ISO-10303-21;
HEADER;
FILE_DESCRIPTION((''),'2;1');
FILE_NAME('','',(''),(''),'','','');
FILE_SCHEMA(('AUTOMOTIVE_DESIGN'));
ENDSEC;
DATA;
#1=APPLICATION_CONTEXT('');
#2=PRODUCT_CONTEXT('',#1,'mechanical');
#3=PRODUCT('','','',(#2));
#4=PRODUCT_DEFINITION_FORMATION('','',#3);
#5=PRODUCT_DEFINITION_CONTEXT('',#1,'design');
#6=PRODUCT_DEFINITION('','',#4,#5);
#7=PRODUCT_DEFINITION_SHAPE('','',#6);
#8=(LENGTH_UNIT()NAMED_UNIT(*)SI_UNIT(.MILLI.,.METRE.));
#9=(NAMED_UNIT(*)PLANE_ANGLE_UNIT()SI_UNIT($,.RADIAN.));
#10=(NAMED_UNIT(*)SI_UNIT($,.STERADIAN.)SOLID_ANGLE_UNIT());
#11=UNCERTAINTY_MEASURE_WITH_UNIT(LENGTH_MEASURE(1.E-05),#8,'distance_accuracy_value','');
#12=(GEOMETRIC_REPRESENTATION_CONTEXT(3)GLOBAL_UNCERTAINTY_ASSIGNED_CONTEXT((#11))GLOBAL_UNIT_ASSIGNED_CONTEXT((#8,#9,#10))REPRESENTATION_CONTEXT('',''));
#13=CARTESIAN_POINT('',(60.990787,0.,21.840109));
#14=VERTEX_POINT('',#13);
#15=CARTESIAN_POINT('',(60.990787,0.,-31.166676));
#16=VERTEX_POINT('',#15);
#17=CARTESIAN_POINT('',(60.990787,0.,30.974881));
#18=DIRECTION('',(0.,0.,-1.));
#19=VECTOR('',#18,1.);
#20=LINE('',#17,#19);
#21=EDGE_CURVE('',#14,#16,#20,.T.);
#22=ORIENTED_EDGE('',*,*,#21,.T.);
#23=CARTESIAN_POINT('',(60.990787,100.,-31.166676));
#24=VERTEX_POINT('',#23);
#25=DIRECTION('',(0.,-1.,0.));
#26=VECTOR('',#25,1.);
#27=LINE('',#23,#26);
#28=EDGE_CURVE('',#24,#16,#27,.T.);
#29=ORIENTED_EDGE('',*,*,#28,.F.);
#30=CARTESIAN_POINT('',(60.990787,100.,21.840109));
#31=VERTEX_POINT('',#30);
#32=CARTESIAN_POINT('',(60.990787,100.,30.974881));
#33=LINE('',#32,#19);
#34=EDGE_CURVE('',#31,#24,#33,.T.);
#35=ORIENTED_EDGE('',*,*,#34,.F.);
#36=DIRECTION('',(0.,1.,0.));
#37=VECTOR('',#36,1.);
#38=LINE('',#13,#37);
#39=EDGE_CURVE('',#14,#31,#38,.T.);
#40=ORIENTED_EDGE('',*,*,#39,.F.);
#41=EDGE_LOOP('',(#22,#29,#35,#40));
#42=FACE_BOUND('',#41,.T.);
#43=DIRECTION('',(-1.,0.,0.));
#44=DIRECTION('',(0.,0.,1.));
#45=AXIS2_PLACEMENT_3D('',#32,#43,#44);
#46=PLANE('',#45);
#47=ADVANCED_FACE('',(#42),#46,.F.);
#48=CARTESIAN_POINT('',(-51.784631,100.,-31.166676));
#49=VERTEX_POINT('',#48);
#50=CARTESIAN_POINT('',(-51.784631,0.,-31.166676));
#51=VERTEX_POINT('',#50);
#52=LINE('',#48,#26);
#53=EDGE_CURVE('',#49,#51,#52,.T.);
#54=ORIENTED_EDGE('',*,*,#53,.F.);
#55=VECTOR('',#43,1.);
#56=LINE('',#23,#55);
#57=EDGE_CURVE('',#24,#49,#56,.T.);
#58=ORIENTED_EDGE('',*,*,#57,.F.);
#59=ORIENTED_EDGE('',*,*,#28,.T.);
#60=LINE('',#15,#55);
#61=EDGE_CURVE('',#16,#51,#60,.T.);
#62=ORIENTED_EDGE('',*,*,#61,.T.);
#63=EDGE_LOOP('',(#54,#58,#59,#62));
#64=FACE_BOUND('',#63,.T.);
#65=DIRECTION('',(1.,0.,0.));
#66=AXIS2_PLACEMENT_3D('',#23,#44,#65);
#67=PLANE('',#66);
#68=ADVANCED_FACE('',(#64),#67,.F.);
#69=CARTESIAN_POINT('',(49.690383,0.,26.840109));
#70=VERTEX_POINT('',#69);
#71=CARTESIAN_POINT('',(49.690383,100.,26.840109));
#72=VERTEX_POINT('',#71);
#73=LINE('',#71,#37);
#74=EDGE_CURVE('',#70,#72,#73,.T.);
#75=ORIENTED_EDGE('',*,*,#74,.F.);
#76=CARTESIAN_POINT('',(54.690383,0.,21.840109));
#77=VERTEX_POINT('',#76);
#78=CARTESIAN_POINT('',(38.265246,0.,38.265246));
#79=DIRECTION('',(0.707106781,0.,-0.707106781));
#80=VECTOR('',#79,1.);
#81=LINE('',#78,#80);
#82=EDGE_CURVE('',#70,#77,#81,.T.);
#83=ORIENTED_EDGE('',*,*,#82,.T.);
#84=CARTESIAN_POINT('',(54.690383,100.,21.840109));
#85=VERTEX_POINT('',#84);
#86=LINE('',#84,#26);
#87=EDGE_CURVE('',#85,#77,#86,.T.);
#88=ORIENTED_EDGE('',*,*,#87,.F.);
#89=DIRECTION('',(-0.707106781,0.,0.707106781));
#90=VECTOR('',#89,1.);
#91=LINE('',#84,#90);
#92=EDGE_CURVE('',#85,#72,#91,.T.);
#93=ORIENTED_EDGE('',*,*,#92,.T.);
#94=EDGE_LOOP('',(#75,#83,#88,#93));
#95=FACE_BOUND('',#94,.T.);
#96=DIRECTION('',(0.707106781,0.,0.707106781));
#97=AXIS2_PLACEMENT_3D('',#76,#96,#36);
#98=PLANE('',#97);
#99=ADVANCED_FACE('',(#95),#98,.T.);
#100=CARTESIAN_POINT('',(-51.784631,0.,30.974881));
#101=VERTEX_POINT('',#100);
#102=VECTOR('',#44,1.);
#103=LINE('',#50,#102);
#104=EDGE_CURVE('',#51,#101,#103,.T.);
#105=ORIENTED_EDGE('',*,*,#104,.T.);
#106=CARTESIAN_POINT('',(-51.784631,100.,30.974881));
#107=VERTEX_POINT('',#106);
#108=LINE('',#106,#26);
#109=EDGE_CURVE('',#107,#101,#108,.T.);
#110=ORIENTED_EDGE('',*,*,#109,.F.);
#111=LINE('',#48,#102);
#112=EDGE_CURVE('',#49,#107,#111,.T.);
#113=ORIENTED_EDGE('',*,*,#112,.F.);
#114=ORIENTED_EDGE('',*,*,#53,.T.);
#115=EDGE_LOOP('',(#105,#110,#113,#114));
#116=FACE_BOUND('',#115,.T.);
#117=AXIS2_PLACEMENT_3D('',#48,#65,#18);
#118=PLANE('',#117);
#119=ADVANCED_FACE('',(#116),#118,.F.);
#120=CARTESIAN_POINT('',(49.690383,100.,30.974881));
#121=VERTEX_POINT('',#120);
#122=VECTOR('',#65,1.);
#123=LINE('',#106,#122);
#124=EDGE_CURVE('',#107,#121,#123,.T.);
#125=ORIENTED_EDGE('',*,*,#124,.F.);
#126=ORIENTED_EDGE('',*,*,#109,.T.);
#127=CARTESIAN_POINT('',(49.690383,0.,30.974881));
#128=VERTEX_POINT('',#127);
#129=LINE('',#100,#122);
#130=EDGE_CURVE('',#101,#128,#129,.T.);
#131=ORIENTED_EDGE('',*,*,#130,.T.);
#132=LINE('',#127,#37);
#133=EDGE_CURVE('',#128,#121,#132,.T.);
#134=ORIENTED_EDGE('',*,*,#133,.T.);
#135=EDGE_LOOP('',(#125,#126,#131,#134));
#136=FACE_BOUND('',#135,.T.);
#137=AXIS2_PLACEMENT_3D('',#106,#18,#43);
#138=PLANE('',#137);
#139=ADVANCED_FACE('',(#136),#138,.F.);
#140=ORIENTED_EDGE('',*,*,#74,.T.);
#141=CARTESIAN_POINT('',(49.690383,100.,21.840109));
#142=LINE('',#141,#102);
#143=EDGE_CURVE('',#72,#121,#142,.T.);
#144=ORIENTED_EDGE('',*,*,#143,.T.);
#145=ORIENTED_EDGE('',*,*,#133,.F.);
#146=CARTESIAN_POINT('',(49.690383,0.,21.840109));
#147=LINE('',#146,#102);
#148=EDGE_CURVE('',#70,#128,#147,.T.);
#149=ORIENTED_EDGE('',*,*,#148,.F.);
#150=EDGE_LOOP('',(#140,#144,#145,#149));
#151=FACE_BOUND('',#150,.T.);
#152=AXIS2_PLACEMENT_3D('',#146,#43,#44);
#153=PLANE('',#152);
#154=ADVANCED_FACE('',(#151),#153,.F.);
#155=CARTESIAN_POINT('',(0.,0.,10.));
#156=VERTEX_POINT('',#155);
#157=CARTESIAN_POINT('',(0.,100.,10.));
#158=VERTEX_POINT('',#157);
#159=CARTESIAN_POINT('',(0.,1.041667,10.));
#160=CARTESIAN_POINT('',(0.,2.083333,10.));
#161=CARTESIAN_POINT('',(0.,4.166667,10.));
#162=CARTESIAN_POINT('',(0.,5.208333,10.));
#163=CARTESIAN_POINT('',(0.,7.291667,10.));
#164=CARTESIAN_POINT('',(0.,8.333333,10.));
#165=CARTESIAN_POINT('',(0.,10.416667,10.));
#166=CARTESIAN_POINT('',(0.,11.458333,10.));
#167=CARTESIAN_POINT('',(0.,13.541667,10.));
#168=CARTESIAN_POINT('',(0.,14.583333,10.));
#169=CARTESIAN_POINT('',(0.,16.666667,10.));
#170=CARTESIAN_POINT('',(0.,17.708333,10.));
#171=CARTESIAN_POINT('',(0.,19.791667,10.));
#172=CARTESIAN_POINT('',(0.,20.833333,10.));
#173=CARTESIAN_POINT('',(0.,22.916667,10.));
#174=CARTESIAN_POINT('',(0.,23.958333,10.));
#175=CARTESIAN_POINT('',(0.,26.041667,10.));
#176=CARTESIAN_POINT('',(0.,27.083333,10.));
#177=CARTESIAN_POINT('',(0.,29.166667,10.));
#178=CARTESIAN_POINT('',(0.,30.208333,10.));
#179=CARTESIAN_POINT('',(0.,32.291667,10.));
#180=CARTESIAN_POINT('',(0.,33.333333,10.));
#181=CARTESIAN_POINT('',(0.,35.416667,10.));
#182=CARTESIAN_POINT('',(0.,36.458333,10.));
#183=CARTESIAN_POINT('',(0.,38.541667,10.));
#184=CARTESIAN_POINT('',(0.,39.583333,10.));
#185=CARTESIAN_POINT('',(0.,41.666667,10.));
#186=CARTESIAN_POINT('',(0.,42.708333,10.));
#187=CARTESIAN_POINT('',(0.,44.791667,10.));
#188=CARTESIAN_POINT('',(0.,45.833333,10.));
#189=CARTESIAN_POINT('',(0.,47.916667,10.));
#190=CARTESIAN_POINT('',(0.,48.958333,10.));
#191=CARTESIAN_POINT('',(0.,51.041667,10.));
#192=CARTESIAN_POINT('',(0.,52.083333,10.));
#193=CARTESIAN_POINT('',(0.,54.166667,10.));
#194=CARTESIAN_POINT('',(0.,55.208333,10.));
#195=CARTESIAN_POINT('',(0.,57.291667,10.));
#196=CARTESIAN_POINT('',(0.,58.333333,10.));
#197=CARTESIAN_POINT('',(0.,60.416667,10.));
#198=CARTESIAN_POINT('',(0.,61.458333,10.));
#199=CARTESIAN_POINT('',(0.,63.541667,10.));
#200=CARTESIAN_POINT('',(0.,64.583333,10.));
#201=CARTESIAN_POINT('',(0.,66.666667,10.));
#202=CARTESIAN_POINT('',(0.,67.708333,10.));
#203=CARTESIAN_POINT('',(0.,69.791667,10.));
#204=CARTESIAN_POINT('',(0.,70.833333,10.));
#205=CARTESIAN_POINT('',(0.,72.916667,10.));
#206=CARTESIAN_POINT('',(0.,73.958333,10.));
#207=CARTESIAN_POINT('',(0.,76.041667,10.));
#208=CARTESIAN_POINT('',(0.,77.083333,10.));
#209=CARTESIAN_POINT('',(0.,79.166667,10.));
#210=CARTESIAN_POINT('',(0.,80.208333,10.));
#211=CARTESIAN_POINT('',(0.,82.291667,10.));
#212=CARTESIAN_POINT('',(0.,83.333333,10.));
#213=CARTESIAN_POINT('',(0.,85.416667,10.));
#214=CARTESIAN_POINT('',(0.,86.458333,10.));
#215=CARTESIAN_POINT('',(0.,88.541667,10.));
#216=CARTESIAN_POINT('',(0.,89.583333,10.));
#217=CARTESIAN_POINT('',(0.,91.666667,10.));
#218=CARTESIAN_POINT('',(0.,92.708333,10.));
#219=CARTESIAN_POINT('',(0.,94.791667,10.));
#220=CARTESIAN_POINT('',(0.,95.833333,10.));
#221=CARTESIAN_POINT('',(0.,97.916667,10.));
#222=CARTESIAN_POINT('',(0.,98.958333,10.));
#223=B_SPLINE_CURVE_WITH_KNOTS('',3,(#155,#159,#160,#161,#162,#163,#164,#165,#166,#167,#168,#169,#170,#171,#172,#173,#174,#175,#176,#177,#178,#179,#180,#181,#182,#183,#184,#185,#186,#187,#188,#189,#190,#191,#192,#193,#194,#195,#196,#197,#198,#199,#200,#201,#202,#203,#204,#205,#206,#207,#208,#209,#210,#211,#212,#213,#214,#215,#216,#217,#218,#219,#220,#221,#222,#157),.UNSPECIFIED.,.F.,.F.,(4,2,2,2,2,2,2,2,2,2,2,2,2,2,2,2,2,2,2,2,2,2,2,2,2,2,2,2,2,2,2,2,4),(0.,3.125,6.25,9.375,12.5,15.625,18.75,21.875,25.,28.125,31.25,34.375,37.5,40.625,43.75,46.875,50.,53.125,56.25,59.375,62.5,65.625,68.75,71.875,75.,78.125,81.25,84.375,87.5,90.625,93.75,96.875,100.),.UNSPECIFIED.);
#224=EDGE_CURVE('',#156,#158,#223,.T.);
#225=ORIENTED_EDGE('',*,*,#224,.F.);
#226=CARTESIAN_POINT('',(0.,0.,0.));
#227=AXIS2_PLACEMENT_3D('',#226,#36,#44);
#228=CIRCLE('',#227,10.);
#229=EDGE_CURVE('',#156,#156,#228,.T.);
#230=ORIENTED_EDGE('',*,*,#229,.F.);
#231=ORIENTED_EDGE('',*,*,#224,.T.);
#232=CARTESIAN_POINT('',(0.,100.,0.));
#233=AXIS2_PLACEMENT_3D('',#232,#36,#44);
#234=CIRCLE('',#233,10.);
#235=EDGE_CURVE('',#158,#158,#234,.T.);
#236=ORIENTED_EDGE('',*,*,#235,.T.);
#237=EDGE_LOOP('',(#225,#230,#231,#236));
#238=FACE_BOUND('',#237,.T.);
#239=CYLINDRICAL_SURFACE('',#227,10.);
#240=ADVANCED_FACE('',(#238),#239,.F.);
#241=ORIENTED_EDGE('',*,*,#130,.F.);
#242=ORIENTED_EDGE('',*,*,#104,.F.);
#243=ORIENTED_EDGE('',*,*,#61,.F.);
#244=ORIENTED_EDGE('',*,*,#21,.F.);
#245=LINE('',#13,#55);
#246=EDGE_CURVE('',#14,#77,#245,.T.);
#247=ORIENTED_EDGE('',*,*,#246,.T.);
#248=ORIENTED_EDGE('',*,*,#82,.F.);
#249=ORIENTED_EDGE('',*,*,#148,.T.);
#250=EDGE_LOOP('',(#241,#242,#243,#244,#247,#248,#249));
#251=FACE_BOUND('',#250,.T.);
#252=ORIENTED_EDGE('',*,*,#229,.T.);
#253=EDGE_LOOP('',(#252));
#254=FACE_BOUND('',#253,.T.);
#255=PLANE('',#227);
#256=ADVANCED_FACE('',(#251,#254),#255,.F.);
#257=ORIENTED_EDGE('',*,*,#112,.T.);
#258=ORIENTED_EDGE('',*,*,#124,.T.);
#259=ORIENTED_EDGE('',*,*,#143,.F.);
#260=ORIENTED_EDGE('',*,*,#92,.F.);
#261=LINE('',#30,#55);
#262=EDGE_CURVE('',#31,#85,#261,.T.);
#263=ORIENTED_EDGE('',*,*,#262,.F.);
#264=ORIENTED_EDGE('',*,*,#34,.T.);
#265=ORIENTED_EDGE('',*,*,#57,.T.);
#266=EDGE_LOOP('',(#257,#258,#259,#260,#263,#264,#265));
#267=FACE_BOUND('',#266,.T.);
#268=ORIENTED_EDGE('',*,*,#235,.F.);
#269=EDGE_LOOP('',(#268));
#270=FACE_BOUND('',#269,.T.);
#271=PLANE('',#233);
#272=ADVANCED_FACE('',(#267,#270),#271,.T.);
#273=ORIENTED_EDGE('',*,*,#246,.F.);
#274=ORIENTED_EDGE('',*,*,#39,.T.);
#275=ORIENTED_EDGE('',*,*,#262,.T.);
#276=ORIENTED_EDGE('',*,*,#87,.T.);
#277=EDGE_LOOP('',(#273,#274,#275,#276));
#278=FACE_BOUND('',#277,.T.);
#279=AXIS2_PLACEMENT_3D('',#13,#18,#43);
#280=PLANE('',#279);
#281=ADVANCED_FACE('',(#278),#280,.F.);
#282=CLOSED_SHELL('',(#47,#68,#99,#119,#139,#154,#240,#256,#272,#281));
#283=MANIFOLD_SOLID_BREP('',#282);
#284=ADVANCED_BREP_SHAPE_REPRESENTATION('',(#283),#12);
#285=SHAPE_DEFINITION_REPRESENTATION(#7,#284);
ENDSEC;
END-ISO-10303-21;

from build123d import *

# Parameters (mm, degrees)
SKETCH3_W           = 112.775418125
SKETCH3_H           = 62.141556926
BOSS_EXTRUDE1_DEPTH = 100
SKETCH4_W           = 11.300404478
SKETCH4_H           = 9.134771786
CUT_EXTRUDE1_DEPTH  = 100
CHAMFER2_SIZE       = 5
SKETCH5_R           = 10
CUT_EXTRUDE2_DEPTH  = 100


with BuildPart() as part:
    # Sketch3 → Boss-Extrude1 (new body)
    with BuildSketch(Plane(origin=(0, 0, 0), x_dir=(1, 0, 0), z_dir=(0, 1, 0))):
        with Locations((4.603078291, 0.095897464)):
            Rectangle(SKETCH3_W, SKETCH3_H)
    extrude(amount=BOSS_EXTRUDE1_DEPTH)

    # Sketch4 → Cut-Extrude1 (cut)
    with BuildSketch(Plane(origin=(0, 100, 0), x_dir=(1, 0, 0), z_dir=(0, 1, 0))):
        with Locations((55.340585114, -26.407495106)):
            Rectangle(SKETCH4_W, SKETCH4_H)
    extrude(amount=-CUT_EXTRUDE1_DEPTH, mode=Mode.SUBTRACT)

    # Chamfer2
    chamfer2_edges = [part.edges().sort_by_distance(p)[0] for p in [
        (49.690382875, 50, 21.840109213),
    ]]
    chamfer(chamfer2_edges, length=CHAMFER2_SIZE)

    # Sketch5 → Cut-Extrude2 (cut)
    with BuildSketch(Plane(origin=(0, 100, 0), x_dir=(1, 0, 0), z_dir=(0, 1, 0))):
        Circle(SKETCH5_R)
    extrude(amount=-CUT_EXTRUDE2_DEPTH, mode=Mode.SUBTRACT)


solid = part.part
